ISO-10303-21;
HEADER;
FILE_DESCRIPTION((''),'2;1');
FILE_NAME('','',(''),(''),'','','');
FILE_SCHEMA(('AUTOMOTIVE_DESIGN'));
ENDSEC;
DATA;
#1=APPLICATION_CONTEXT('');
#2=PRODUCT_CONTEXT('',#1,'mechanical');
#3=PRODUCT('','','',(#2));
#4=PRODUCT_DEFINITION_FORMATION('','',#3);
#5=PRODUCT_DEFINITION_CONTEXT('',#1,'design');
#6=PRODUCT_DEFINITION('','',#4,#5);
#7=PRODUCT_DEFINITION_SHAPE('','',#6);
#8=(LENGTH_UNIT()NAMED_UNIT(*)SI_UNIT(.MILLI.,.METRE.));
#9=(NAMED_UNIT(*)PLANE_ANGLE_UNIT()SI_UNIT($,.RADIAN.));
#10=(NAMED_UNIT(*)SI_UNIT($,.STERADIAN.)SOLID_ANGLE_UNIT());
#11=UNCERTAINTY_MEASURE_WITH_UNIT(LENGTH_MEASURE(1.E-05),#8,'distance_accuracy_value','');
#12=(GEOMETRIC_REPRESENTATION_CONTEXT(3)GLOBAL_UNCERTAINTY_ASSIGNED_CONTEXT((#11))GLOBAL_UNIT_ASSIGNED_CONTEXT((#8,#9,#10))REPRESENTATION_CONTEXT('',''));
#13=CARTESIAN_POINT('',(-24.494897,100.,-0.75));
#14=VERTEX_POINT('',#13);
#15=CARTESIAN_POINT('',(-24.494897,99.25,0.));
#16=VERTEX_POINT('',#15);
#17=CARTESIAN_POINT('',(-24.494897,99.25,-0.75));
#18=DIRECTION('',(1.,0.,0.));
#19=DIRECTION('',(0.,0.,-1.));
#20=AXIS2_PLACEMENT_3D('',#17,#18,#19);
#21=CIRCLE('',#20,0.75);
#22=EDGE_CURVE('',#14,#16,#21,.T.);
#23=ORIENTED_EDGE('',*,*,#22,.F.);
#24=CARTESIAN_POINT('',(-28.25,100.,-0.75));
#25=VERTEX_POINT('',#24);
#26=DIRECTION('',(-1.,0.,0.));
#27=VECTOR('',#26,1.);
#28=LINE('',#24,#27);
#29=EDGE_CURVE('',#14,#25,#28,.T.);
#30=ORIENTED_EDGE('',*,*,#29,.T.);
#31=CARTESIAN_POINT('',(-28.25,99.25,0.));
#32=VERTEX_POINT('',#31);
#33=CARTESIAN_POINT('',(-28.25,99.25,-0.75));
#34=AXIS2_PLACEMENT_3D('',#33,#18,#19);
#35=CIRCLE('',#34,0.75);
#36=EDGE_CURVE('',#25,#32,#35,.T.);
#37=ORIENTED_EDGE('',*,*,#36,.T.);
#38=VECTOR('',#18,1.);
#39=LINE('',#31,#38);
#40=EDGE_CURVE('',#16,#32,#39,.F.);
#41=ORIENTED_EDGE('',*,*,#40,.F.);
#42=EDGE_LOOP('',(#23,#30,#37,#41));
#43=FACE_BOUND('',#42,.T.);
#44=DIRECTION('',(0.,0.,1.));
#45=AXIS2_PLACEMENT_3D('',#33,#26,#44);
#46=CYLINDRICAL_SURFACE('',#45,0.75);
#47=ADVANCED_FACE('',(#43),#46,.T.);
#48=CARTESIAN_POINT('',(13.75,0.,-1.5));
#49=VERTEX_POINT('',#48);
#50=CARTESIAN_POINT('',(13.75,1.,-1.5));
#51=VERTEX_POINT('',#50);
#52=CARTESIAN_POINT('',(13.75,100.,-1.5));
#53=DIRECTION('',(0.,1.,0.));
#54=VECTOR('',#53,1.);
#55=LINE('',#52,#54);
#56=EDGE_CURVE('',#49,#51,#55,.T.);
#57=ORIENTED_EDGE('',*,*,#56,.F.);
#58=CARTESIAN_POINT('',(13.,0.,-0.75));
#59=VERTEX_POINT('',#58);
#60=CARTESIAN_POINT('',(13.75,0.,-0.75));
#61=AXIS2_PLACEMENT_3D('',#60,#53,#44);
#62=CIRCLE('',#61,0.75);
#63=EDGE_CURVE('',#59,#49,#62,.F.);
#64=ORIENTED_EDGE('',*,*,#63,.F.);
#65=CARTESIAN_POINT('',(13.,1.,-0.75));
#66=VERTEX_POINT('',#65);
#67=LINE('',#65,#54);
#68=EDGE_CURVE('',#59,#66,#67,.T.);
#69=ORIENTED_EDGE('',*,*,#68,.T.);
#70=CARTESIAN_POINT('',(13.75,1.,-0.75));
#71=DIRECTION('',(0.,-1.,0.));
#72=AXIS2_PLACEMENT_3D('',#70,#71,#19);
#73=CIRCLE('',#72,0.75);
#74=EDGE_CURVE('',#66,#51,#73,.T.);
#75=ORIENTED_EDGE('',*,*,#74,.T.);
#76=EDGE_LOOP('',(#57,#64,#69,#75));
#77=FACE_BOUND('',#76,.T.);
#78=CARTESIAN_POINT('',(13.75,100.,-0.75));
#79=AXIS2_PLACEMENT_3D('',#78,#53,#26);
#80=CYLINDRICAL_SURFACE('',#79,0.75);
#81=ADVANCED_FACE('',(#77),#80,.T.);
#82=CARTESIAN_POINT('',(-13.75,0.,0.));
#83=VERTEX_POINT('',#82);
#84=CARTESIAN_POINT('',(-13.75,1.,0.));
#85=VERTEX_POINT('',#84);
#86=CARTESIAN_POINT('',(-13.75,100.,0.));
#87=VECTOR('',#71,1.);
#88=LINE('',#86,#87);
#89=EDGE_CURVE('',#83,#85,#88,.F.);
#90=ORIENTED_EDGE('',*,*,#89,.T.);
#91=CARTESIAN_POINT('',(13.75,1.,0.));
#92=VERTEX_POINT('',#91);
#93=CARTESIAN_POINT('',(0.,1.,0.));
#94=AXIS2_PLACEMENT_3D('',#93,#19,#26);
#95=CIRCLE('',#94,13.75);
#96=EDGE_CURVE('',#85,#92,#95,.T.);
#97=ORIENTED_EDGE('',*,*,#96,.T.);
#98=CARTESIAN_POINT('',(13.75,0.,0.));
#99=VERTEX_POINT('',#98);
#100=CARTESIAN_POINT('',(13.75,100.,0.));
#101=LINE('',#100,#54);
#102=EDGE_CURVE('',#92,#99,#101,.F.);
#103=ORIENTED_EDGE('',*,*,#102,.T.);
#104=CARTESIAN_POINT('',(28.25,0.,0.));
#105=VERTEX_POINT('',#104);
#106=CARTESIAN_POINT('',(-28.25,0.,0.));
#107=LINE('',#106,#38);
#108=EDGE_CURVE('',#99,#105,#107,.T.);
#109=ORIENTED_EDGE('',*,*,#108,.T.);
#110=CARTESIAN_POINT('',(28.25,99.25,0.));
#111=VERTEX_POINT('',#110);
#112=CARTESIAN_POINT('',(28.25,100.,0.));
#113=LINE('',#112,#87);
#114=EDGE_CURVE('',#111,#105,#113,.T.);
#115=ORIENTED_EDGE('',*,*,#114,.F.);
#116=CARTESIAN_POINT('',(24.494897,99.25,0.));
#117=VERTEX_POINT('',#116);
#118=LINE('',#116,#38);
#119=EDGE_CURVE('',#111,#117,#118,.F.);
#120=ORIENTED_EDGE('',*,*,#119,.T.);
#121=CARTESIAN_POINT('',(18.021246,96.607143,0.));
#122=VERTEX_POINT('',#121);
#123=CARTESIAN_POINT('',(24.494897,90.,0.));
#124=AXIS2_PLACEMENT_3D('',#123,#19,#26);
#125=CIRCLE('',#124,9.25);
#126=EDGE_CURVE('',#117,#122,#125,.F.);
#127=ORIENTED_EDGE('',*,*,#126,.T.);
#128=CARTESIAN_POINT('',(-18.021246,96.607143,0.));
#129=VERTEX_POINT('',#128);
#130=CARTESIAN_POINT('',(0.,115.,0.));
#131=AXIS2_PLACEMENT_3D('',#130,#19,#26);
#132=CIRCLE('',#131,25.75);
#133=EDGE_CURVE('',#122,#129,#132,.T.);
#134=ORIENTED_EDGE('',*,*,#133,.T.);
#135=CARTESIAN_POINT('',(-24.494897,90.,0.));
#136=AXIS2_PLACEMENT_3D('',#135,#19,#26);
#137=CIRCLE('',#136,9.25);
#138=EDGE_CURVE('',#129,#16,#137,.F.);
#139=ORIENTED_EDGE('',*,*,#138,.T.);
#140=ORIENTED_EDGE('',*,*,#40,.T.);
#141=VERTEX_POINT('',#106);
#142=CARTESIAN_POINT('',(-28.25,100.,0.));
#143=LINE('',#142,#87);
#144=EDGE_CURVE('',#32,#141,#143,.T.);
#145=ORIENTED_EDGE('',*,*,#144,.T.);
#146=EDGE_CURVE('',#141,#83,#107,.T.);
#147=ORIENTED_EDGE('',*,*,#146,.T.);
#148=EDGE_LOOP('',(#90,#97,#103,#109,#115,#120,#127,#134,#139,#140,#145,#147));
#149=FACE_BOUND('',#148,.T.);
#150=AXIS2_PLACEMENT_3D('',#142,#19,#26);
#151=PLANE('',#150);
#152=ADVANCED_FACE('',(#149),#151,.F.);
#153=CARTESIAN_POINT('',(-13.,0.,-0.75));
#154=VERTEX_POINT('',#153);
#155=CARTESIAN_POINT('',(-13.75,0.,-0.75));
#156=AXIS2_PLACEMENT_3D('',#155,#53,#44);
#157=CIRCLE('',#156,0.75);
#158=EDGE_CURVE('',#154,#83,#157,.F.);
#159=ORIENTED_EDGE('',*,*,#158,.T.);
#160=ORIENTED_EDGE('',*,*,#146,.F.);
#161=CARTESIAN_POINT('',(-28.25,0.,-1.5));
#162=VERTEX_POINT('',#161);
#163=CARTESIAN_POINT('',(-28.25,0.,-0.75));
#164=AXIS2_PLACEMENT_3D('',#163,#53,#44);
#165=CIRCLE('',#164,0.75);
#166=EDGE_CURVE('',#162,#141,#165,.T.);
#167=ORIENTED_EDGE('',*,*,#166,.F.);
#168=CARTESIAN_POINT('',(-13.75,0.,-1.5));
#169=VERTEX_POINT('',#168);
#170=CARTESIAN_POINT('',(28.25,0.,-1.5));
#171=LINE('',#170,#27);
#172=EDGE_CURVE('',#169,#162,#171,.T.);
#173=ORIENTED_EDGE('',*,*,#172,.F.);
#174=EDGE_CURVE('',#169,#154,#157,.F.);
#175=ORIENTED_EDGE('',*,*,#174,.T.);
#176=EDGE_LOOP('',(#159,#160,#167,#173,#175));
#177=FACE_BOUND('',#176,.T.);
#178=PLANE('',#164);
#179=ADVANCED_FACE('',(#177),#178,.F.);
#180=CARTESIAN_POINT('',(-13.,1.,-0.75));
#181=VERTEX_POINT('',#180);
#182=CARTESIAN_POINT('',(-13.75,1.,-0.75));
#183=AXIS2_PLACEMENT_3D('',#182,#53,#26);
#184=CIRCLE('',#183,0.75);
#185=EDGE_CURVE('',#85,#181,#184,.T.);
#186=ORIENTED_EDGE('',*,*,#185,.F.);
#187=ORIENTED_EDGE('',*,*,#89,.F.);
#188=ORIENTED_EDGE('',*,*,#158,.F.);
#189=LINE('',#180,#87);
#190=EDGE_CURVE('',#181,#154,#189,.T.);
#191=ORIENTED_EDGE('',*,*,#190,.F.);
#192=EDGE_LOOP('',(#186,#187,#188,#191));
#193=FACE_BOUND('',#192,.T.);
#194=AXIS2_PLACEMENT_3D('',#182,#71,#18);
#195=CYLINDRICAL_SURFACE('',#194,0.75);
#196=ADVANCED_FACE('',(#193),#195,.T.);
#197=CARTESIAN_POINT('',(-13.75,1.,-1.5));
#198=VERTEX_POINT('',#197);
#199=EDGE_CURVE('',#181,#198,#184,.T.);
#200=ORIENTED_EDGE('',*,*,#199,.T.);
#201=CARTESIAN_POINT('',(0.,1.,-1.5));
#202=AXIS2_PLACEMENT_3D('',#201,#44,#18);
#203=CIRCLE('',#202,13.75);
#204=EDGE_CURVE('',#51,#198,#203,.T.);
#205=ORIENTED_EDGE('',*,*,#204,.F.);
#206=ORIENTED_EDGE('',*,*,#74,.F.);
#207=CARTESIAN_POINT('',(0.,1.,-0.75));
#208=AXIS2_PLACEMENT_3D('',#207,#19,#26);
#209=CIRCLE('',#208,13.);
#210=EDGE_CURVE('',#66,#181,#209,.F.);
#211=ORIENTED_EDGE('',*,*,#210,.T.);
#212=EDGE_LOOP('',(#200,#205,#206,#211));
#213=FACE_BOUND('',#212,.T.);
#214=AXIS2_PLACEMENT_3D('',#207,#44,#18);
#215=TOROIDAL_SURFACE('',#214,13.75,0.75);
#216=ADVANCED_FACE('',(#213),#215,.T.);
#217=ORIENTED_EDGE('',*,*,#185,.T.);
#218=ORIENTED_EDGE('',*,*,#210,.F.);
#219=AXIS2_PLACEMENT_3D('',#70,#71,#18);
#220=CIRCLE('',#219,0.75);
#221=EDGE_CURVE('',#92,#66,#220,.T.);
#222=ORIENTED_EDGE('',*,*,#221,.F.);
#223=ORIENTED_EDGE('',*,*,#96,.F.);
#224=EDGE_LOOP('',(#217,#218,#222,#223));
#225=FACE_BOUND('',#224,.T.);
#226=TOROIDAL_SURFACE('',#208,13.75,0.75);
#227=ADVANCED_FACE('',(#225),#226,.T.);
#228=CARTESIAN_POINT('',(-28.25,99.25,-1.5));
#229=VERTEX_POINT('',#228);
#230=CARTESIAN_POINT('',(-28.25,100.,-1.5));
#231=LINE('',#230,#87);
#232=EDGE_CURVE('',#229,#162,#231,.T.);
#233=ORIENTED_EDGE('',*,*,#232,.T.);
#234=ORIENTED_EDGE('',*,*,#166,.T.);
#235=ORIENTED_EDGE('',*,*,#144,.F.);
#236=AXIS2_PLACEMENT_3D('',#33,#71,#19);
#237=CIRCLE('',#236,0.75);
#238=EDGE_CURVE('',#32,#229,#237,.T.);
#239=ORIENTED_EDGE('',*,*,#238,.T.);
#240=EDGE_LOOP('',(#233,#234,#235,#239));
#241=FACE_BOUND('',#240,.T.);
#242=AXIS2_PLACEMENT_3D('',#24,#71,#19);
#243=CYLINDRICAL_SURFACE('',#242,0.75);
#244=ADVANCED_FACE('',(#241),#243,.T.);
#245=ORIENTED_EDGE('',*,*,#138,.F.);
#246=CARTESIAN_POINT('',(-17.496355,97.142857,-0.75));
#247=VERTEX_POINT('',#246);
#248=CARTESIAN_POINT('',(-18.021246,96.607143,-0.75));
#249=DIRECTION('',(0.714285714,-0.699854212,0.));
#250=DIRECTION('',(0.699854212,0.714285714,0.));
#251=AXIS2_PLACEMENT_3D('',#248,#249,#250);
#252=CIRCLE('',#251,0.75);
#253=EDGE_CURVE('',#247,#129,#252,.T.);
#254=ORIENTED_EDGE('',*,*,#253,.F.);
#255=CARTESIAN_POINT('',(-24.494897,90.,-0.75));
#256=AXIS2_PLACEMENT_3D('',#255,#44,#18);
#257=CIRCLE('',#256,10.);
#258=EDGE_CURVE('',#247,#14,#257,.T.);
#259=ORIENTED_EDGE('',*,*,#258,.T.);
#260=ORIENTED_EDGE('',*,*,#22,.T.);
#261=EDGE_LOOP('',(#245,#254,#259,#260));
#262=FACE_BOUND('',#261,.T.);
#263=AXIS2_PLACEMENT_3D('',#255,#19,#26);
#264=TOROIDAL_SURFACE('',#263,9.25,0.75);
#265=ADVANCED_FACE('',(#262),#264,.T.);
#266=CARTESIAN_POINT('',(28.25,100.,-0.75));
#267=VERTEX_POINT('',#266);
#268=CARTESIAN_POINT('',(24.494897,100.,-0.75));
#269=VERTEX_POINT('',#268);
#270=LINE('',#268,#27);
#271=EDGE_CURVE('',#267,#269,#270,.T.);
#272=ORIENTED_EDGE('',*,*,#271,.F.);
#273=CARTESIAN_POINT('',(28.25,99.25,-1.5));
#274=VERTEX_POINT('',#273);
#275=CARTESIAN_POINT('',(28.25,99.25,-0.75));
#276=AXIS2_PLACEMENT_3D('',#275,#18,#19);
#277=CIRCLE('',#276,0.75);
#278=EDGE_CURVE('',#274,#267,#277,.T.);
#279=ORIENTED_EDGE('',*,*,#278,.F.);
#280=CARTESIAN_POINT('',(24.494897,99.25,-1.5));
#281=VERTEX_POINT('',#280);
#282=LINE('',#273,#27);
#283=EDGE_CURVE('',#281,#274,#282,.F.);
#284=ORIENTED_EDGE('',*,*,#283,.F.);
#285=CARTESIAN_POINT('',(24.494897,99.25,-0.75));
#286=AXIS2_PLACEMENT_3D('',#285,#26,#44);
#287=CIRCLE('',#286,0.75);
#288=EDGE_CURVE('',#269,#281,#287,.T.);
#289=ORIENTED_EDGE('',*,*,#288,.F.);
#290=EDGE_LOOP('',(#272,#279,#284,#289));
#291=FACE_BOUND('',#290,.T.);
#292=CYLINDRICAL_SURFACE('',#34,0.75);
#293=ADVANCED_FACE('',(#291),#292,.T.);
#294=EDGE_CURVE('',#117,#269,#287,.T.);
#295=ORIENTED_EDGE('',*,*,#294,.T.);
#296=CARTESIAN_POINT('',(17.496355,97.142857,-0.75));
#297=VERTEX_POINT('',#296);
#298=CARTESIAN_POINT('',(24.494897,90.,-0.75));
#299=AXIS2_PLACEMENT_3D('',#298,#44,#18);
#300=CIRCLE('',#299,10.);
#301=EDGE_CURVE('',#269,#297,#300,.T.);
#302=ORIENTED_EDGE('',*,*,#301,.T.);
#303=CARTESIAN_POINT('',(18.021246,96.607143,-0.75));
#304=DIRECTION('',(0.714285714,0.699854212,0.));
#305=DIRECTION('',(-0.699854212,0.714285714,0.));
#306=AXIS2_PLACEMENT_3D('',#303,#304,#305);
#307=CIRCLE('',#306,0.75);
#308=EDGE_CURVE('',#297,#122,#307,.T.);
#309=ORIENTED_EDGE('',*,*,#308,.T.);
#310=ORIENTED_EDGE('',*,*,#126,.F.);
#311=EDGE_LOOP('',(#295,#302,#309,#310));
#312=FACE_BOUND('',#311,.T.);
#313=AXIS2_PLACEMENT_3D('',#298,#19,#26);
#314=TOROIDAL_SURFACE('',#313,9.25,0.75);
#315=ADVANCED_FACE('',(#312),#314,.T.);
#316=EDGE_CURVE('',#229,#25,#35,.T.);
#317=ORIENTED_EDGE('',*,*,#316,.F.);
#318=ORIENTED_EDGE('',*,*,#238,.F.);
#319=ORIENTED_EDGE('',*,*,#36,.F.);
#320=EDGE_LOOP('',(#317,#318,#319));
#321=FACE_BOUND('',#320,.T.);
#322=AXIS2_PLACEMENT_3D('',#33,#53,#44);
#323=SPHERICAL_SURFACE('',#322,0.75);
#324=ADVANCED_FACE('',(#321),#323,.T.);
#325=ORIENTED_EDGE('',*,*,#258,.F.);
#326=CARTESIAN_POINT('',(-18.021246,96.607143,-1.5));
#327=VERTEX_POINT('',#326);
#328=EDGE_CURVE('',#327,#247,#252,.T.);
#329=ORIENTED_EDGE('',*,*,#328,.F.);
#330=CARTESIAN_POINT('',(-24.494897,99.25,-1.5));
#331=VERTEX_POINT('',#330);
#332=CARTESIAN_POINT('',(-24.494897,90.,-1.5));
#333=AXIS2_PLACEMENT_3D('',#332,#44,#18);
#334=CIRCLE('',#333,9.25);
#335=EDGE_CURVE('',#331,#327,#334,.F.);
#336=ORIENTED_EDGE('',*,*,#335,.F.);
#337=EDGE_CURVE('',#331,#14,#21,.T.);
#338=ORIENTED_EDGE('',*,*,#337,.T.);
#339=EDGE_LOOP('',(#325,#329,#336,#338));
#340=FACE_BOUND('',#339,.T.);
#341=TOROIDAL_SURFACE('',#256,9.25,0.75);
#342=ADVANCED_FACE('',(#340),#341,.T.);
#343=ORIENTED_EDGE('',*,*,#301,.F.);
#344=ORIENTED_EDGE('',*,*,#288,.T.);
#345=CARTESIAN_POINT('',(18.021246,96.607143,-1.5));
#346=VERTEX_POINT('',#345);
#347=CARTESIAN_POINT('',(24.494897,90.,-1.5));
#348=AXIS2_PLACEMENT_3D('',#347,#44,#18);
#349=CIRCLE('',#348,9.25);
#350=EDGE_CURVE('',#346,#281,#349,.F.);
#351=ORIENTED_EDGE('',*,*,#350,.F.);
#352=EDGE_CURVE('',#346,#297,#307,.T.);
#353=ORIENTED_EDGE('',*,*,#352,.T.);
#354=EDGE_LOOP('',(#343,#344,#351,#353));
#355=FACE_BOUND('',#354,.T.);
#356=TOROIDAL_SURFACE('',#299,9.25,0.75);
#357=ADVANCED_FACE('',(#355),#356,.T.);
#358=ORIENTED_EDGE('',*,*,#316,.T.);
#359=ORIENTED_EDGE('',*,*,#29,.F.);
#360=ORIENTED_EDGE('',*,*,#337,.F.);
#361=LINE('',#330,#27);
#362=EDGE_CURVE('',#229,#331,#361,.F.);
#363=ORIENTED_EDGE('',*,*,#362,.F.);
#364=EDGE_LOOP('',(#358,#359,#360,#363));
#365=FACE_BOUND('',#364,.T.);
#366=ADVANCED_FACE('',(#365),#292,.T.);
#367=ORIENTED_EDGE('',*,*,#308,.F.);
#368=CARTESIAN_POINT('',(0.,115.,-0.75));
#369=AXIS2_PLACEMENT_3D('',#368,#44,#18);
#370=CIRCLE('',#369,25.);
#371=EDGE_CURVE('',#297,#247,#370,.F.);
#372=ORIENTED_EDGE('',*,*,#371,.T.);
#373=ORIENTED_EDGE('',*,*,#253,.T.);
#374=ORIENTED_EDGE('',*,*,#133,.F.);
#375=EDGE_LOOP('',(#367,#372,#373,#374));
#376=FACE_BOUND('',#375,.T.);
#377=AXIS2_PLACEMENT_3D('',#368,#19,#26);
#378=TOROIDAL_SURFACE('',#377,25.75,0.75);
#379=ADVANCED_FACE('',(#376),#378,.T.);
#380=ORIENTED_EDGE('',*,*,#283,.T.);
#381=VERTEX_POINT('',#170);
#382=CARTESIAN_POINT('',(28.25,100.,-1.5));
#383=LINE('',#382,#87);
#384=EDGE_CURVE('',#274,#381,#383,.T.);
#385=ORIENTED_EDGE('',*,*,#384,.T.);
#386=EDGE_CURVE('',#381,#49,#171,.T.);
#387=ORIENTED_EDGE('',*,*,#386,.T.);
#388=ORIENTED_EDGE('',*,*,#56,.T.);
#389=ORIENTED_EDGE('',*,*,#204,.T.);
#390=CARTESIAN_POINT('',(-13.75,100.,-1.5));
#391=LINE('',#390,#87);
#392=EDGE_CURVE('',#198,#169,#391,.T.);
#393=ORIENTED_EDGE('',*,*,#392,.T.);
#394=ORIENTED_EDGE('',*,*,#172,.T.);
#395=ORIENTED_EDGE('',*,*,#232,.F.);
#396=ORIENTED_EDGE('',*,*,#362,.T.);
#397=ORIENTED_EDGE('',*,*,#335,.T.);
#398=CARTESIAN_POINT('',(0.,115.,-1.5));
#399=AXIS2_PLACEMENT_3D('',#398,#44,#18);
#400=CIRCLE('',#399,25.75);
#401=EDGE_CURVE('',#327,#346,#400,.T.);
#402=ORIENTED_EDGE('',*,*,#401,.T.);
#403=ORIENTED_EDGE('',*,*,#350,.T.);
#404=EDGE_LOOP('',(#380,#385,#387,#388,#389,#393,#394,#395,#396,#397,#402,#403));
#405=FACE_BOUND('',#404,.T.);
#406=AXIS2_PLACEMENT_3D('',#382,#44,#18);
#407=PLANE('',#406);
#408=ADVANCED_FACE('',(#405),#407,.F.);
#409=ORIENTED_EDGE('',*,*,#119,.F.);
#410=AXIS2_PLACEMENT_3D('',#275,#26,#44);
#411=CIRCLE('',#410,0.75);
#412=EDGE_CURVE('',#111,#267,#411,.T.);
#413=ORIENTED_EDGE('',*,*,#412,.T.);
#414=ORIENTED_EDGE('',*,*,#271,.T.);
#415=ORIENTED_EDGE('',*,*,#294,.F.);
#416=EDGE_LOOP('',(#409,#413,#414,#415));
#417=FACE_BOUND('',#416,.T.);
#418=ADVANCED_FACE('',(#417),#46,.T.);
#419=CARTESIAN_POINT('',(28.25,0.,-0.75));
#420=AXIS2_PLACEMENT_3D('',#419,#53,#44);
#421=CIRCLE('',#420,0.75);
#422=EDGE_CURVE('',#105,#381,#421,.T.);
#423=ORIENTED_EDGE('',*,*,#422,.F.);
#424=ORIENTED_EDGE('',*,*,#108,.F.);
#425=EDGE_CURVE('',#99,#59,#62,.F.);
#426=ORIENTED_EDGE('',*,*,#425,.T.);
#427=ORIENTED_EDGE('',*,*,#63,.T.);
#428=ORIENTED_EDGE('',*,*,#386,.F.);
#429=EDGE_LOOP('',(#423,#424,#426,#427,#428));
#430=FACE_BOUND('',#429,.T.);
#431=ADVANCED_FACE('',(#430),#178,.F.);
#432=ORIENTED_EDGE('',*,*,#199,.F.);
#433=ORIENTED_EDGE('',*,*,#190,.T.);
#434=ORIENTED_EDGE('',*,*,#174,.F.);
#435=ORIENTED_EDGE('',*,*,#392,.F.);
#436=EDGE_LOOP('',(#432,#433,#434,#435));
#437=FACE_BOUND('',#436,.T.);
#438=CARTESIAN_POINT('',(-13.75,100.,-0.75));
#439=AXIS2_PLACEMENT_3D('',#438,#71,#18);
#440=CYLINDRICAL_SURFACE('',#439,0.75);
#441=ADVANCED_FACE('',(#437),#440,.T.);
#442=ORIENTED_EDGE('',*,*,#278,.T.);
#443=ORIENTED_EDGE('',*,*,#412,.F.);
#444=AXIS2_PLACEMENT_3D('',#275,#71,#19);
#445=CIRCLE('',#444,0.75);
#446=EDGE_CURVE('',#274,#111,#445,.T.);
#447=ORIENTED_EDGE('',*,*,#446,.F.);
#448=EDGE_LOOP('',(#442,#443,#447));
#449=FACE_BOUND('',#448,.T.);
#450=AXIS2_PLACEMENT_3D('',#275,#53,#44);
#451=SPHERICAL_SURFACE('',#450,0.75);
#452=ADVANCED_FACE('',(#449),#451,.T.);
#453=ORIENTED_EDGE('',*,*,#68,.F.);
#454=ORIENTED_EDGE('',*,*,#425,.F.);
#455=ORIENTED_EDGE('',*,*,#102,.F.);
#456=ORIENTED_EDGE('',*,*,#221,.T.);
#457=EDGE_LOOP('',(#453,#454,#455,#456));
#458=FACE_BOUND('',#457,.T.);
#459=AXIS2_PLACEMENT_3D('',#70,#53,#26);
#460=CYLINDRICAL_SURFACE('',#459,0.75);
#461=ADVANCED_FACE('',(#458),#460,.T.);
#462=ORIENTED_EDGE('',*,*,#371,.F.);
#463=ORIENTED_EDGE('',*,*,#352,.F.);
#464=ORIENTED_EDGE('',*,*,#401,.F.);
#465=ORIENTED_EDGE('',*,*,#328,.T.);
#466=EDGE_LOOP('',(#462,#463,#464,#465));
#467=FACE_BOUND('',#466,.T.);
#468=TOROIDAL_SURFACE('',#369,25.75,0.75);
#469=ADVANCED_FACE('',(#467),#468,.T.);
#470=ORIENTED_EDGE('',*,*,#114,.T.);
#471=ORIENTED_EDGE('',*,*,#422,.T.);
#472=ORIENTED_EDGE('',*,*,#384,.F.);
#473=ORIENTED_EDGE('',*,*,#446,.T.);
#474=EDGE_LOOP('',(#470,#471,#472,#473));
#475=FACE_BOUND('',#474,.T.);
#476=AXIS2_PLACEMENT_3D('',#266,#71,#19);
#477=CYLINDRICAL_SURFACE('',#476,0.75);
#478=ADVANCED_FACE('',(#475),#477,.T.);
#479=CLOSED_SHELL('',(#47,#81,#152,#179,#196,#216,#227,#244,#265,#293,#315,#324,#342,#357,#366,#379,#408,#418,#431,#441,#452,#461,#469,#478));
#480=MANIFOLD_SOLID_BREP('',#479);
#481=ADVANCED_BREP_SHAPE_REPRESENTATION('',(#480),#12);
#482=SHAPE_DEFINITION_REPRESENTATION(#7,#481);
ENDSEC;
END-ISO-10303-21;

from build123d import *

# Parameters (mm, degrees)
BOSS_EXTRUDE1_DEPTH     = 100
CUT_EXTRUDE1_DEPTH      = 105.130927202
CUT_EXTRUDE1_DEPTH_BACK = 105.130927202
CUT_EXTRUDE2_DEPTH      = 10
FILLET6_R               = 10
FILLET7_R               = 10
FILLET13_R              = 0.75
FILLET14_R              = 0.75


with BuildPart() as part:
    # Sketch1 → Boss-Extrude1 (new body)
    with BuildSketch(Plane(origin=(0, 0, 0), x_dir=(1, 0, 0), z_dir=(0, 1, 0))):
        with BuildLine():
            Line((-28.25, 0), (28.25, 0))
            ThreePointArc((28.25, 0), (29, 0.75), (28.25, 1.5))
            Line((28.25, 1.5), (-28.25, 1.5))
            ThreePointArc((-28.25, 1.5), (-29, 0.75), (-28.25, 0))
        make_face()
    extrude(amount=BOSS_EXTRUDE1_DEPTH)

    # Sketch2 → Cut-Extrude1 (cut, two sides: drawn at the far end of the back side and taken through both)
    with BuildSketch(Plane.XY.offset(-CUT_EXTRUDE1_DEPTH_BACK)):
        with BuildLine():
            Line((-20, 100), (20, 100))
            ThreePointArc((20, 100), (0, 90), (-20, 100))
        make_face()
    extrude(amount=CUT_EXTRUDE1_DEPTH + CUT_EXTRUDE1_DEPTH_BACK, mode=Mode.SUBTRACT)

    # Sketch3 → Cut-Extrude2 (cut)
    with BuildSketch(Plane.XY):
        with BuildLine():
            Line((13, 1), (13, 0))
            Line((13, 0), (-13, 0))
            Line((-13, 0), (-13, 1))
            ThreePointArc((-13, 1), (0, 14), (13, 1))
        make_face()
    extrude(amount=-CUT_EXTRUDE2_DEPTH, mode=Mode.SUBTRACT)

    # Fillet6
    fillet6_edges = [part.edges().sort_by_distance(p)[0] for p in [
        (-20, 100, -0.75),
    ]]
    fillet(fillet6_edges, radius=FILLET6_R)

    # Fillet7
    fillet7_edges = [part.edges().sort_by_distance(p)[0] for p in [
        (20, 100, -0.75),
    ]]
    fillet(fillet7_edges, radius=FILLET7_R)

    # Fillet13
    fillet13_edges = [part.edges().sort_by_distance(p)[0] for p in [
        (20.715252698, 99.258200998, 0),
        (-20.715252698, 99.258200998, 0),
        (20.715252698, 99.258200998, -1.5),
        (-20.715252698, 99.258200998, -1.5),
        (29, 100, -0.75),
        (26.372448714, 100, 0),
        (26.372448714, 100, -1.5),
        (0, 90, -1.5),
        (0, 90, 0),
        (-29, 100, -0.75),
        (-26.372448714, 100, -1.5),
        (-26.372448714, 100, 0),
    ]]
    fillet(fillet13_edges, radius=FILLET13_R - 0.0001)  # a hair under: the kernel refuses the full size

    # Fillet14
    fillet14_edges = [part.edges().sort_by_distance(p)[0] for p in [
        (13, 0.5, -1.5),
        (-13, 0.5, -1.5),
        (13, 0.5, 0),
        (-13, 0.5, 0),
        (0, 14, -1.5),
        (0, 14, 0),
    ]]
    fillet(fillet14_edges, radius=FILLET14_R - 0.0001)  # a hair under: the kernel refuses the full size


solid = part.part
